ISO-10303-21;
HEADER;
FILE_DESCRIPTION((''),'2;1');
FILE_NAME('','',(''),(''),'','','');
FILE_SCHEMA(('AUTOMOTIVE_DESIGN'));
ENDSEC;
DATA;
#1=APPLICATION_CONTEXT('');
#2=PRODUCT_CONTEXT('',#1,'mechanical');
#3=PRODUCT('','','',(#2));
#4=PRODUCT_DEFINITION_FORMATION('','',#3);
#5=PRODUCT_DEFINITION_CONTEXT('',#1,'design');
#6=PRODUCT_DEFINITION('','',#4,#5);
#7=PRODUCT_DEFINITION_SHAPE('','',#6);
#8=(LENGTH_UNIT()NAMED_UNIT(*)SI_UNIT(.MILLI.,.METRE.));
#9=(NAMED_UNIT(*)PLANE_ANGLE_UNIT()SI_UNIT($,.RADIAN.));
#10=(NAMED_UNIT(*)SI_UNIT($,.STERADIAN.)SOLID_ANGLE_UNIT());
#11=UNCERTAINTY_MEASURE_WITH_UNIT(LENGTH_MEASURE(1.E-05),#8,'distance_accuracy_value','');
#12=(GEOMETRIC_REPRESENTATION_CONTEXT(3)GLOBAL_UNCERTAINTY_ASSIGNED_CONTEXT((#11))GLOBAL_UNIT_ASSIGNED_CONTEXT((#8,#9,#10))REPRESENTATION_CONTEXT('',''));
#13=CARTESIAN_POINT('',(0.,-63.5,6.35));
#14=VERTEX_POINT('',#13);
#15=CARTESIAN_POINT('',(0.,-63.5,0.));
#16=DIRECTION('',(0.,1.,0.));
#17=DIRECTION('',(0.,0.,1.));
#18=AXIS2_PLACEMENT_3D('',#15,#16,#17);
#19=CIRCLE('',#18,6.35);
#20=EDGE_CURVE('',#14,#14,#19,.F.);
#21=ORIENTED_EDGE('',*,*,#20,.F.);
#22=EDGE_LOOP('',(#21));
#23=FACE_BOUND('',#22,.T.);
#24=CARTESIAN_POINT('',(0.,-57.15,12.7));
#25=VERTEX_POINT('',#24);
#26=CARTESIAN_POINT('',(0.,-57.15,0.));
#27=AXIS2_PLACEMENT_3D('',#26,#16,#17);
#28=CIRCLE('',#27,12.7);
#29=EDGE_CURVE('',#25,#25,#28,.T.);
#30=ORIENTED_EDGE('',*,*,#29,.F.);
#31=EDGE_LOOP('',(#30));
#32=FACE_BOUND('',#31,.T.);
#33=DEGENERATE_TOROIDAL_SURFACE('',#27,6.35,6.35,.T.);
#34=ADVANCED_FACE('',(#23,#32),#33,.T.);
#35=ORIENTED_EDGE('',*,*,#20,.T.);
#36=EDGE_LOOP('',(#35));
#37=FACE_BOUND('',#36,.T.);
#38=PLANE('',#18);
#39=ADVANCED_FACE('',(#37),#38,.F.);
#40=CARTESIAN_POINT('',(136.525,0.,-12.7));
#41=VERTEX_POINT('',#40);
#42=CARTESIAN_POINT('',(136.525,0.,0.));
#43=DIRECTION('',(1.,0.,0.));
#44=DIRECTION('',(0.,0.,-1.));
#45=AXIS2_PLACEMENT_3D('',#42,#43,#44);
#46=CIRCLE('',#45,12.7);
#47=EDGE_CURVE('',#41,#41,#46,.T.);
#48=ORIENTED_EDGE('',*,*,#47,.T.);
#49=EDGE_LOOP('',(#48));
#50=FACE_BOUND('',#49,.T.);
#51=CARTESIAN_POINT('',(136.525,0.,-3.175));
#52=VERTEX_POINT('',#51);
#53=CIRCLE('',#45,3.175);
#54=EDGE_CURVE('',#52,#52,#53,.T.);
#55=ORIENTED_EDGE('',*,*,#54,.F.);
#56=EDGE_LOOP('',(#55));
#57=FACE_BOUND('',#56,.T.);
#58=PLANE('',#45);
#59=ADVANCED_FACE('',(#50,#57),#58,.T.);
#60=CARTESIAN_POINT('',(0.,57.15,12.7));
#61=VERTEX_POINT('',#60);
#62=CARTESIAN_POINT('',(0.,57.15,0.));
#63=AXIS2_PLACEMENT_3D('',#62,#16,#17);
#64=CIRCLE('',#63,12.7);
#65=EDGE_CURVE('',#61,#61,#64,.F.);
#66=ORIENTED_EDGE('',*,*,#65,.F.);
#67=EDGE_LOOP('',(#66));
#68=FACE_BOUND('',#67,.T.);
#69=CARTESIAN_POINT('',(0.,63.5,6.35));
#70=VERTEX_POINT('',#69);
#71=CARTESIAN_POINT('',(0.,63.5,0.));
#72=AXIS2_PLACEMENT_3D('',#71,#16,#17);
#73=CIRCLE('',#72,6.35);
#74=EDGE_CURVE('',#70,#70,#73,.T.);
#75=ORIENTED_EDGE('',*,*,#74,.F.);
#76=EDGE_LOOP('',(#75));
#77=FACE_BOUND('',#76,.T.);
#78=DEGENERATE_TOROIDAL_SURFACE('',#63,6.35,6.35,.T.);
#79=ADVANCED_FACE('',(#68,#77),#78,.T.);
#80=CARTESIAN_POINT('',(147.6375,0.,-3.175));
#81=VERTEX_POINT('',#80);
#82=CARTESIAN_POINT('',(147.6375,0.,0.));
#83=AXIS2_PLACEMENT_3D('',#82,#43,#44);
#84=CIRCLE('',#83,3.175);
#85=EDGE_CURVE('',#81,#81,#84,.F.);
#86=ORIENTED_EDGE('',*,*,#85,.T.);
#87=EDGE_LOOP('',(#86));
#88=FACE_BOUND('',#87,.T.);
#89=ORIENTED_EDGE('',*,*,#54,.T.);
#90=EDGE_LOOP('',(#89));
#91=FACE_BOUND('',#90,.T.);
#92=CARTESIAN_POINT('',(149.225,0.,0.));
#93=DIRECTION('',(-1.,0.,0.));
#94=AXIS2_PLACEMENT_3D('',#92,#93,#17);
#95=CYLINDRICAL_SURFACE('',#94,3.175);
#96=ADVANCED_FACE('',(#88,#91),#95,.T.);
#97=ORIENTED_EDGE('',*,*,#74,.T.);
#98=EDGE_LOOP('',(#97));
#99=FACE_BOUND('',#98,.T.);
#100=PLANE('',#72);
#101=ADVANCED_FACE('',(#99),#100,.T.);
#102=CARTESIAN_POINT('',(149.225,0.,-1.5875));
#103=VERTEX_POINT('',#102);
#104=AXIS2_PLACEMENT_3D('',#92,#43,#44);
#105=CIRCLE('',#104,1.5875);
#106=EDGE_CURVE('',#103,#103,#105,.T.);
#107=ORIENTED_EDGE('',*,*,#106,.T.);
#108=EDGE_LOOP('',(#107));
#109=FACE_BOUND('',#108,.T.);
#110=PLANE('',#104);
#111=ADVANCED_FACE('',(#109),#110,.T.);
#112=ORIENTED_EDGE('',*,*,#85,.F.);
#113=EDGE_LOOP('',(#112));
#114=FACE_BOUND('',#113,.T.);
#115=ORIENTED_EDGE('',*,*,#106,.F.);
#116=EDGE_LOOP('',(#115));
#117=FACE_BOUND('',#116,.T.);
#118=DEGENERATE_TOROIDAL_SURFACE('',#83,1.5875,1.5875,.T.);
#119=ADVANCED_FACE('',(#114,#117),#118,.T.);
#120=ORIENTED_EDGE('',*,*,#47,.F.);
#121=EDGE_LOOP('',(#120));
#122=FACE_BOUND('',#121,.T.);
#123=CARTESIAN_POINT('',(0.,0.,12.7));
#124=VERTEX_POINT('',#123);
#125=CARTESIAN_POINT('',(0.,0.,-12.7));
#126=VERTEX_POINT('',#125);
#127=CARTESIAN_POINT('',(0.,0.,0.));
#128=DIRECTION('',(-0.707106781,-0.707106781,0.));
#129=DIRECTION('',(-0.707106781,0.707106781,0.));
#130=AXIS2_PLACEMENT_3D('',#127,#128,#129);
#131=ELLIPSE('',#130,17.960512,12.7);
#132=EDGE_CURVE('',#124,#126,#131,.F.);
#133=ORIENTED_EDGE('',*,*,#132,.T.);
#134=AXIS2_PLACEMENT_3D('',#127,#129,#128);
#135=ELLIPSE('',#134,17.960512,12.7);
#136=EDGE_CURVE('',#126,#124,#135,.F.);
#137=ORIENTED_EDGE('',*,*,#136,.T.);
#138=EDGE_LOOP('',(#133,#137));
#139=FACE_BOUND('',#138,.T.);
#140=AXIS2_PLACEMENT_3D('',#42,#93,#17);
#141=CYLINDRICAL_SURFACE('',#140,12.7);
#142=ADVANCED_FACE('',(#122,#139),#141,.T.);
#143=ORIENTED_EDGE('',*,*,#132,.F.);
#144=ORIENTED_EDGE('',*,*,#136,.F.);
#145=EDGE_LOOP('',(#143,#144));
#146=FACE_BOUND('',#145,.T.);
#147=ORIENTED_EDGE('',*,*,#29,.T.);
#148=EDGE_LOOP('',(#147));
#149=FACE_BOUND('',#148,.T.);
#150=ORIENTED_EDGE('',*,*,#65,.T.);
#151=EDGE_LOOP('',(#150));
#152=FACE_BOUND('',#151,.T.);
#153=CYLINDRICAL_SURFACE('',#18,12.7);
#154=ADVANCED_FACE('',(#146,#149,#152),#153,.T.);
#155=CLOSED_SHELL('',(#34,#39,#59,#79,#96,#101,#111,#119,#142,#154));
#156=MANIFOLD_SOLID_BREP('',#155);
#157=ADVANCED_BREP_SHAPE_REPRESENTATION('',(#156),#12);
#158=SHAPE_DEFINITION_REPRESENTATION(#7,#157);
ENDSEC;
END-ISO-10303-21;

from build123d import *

# Parameters (mm, degrees)
SKETCH1_R                = 12.7
BOSS_EXTRUDE1_DEPTH      = 136.525
SKETCH2_R                = 3.175
BOSS_EXTRUDE2_DEPTH      = 12.7
FILLET2_R                = 1.5875
BOSS_EXTRUDE3_DEPTH      = 63.5
BOSS_EXTRUDE3_DEPTH_BACK = 63.5
SKETCH3_R                = 12.7
FILLET3_R                = 6.35


with BuildPart() as part:
    # Sketch1 → Boss-Extrude1 (new body)
    with BuildSketch(Plane(origin=(0, 0, 0), x_dir=(0, 0, -1), z_dir=(1, 0, 0))):
        Circle(SKETCH1_R)
    extrude(amount=BOSS_EXTRUDE1_DEPTH)

    # Sketch2 → Boss-Extrude2 (add)
    with BuildSketch(Plane(origin=(136.525, 0, 0), x_dir=(0, 0, -1), z_dir=(1, 0, 0))):
        Circle(SKETCH2_R)
    extrude(amount=BOSS_EXTRUDE2_DEPTH)

    # Fillet2
    fillet2_edges = [part.edges().sort_by_distance(p)[0] for p in [
        (149.225, 0, 3.175),
    ]]
    fillet(fillet2_edges, radius=FILLET2_R)

    # Sketch3 → Boss-Extrude3 (add, two sides: drawn at the far end of the back side and taken through both)
    with BuildSketch(Plane(origin=(0, 0, 0), x_dir=(1, 0, 0), z_dir=(0, 1, 0)).offset(-BOSS_EXTRUDE3_DEPTH_BACK)):
        Circle(SKETCH3_R)
    extrude(amount=BOSS_EXTRUDE3_DEPTH + BOSS_EXTRUDE3_DEPTH_BACK)

    # Fillet3
    fillet3_edges = [part.edges().sort_by_distance(p)[0] for p in [
        (-12.7, 63.5, 0),
        (-12.7, -63.5, 0),
    ]]
    fillet(fillet3_edges, radius=FILLET3_R)


solid = part.part
